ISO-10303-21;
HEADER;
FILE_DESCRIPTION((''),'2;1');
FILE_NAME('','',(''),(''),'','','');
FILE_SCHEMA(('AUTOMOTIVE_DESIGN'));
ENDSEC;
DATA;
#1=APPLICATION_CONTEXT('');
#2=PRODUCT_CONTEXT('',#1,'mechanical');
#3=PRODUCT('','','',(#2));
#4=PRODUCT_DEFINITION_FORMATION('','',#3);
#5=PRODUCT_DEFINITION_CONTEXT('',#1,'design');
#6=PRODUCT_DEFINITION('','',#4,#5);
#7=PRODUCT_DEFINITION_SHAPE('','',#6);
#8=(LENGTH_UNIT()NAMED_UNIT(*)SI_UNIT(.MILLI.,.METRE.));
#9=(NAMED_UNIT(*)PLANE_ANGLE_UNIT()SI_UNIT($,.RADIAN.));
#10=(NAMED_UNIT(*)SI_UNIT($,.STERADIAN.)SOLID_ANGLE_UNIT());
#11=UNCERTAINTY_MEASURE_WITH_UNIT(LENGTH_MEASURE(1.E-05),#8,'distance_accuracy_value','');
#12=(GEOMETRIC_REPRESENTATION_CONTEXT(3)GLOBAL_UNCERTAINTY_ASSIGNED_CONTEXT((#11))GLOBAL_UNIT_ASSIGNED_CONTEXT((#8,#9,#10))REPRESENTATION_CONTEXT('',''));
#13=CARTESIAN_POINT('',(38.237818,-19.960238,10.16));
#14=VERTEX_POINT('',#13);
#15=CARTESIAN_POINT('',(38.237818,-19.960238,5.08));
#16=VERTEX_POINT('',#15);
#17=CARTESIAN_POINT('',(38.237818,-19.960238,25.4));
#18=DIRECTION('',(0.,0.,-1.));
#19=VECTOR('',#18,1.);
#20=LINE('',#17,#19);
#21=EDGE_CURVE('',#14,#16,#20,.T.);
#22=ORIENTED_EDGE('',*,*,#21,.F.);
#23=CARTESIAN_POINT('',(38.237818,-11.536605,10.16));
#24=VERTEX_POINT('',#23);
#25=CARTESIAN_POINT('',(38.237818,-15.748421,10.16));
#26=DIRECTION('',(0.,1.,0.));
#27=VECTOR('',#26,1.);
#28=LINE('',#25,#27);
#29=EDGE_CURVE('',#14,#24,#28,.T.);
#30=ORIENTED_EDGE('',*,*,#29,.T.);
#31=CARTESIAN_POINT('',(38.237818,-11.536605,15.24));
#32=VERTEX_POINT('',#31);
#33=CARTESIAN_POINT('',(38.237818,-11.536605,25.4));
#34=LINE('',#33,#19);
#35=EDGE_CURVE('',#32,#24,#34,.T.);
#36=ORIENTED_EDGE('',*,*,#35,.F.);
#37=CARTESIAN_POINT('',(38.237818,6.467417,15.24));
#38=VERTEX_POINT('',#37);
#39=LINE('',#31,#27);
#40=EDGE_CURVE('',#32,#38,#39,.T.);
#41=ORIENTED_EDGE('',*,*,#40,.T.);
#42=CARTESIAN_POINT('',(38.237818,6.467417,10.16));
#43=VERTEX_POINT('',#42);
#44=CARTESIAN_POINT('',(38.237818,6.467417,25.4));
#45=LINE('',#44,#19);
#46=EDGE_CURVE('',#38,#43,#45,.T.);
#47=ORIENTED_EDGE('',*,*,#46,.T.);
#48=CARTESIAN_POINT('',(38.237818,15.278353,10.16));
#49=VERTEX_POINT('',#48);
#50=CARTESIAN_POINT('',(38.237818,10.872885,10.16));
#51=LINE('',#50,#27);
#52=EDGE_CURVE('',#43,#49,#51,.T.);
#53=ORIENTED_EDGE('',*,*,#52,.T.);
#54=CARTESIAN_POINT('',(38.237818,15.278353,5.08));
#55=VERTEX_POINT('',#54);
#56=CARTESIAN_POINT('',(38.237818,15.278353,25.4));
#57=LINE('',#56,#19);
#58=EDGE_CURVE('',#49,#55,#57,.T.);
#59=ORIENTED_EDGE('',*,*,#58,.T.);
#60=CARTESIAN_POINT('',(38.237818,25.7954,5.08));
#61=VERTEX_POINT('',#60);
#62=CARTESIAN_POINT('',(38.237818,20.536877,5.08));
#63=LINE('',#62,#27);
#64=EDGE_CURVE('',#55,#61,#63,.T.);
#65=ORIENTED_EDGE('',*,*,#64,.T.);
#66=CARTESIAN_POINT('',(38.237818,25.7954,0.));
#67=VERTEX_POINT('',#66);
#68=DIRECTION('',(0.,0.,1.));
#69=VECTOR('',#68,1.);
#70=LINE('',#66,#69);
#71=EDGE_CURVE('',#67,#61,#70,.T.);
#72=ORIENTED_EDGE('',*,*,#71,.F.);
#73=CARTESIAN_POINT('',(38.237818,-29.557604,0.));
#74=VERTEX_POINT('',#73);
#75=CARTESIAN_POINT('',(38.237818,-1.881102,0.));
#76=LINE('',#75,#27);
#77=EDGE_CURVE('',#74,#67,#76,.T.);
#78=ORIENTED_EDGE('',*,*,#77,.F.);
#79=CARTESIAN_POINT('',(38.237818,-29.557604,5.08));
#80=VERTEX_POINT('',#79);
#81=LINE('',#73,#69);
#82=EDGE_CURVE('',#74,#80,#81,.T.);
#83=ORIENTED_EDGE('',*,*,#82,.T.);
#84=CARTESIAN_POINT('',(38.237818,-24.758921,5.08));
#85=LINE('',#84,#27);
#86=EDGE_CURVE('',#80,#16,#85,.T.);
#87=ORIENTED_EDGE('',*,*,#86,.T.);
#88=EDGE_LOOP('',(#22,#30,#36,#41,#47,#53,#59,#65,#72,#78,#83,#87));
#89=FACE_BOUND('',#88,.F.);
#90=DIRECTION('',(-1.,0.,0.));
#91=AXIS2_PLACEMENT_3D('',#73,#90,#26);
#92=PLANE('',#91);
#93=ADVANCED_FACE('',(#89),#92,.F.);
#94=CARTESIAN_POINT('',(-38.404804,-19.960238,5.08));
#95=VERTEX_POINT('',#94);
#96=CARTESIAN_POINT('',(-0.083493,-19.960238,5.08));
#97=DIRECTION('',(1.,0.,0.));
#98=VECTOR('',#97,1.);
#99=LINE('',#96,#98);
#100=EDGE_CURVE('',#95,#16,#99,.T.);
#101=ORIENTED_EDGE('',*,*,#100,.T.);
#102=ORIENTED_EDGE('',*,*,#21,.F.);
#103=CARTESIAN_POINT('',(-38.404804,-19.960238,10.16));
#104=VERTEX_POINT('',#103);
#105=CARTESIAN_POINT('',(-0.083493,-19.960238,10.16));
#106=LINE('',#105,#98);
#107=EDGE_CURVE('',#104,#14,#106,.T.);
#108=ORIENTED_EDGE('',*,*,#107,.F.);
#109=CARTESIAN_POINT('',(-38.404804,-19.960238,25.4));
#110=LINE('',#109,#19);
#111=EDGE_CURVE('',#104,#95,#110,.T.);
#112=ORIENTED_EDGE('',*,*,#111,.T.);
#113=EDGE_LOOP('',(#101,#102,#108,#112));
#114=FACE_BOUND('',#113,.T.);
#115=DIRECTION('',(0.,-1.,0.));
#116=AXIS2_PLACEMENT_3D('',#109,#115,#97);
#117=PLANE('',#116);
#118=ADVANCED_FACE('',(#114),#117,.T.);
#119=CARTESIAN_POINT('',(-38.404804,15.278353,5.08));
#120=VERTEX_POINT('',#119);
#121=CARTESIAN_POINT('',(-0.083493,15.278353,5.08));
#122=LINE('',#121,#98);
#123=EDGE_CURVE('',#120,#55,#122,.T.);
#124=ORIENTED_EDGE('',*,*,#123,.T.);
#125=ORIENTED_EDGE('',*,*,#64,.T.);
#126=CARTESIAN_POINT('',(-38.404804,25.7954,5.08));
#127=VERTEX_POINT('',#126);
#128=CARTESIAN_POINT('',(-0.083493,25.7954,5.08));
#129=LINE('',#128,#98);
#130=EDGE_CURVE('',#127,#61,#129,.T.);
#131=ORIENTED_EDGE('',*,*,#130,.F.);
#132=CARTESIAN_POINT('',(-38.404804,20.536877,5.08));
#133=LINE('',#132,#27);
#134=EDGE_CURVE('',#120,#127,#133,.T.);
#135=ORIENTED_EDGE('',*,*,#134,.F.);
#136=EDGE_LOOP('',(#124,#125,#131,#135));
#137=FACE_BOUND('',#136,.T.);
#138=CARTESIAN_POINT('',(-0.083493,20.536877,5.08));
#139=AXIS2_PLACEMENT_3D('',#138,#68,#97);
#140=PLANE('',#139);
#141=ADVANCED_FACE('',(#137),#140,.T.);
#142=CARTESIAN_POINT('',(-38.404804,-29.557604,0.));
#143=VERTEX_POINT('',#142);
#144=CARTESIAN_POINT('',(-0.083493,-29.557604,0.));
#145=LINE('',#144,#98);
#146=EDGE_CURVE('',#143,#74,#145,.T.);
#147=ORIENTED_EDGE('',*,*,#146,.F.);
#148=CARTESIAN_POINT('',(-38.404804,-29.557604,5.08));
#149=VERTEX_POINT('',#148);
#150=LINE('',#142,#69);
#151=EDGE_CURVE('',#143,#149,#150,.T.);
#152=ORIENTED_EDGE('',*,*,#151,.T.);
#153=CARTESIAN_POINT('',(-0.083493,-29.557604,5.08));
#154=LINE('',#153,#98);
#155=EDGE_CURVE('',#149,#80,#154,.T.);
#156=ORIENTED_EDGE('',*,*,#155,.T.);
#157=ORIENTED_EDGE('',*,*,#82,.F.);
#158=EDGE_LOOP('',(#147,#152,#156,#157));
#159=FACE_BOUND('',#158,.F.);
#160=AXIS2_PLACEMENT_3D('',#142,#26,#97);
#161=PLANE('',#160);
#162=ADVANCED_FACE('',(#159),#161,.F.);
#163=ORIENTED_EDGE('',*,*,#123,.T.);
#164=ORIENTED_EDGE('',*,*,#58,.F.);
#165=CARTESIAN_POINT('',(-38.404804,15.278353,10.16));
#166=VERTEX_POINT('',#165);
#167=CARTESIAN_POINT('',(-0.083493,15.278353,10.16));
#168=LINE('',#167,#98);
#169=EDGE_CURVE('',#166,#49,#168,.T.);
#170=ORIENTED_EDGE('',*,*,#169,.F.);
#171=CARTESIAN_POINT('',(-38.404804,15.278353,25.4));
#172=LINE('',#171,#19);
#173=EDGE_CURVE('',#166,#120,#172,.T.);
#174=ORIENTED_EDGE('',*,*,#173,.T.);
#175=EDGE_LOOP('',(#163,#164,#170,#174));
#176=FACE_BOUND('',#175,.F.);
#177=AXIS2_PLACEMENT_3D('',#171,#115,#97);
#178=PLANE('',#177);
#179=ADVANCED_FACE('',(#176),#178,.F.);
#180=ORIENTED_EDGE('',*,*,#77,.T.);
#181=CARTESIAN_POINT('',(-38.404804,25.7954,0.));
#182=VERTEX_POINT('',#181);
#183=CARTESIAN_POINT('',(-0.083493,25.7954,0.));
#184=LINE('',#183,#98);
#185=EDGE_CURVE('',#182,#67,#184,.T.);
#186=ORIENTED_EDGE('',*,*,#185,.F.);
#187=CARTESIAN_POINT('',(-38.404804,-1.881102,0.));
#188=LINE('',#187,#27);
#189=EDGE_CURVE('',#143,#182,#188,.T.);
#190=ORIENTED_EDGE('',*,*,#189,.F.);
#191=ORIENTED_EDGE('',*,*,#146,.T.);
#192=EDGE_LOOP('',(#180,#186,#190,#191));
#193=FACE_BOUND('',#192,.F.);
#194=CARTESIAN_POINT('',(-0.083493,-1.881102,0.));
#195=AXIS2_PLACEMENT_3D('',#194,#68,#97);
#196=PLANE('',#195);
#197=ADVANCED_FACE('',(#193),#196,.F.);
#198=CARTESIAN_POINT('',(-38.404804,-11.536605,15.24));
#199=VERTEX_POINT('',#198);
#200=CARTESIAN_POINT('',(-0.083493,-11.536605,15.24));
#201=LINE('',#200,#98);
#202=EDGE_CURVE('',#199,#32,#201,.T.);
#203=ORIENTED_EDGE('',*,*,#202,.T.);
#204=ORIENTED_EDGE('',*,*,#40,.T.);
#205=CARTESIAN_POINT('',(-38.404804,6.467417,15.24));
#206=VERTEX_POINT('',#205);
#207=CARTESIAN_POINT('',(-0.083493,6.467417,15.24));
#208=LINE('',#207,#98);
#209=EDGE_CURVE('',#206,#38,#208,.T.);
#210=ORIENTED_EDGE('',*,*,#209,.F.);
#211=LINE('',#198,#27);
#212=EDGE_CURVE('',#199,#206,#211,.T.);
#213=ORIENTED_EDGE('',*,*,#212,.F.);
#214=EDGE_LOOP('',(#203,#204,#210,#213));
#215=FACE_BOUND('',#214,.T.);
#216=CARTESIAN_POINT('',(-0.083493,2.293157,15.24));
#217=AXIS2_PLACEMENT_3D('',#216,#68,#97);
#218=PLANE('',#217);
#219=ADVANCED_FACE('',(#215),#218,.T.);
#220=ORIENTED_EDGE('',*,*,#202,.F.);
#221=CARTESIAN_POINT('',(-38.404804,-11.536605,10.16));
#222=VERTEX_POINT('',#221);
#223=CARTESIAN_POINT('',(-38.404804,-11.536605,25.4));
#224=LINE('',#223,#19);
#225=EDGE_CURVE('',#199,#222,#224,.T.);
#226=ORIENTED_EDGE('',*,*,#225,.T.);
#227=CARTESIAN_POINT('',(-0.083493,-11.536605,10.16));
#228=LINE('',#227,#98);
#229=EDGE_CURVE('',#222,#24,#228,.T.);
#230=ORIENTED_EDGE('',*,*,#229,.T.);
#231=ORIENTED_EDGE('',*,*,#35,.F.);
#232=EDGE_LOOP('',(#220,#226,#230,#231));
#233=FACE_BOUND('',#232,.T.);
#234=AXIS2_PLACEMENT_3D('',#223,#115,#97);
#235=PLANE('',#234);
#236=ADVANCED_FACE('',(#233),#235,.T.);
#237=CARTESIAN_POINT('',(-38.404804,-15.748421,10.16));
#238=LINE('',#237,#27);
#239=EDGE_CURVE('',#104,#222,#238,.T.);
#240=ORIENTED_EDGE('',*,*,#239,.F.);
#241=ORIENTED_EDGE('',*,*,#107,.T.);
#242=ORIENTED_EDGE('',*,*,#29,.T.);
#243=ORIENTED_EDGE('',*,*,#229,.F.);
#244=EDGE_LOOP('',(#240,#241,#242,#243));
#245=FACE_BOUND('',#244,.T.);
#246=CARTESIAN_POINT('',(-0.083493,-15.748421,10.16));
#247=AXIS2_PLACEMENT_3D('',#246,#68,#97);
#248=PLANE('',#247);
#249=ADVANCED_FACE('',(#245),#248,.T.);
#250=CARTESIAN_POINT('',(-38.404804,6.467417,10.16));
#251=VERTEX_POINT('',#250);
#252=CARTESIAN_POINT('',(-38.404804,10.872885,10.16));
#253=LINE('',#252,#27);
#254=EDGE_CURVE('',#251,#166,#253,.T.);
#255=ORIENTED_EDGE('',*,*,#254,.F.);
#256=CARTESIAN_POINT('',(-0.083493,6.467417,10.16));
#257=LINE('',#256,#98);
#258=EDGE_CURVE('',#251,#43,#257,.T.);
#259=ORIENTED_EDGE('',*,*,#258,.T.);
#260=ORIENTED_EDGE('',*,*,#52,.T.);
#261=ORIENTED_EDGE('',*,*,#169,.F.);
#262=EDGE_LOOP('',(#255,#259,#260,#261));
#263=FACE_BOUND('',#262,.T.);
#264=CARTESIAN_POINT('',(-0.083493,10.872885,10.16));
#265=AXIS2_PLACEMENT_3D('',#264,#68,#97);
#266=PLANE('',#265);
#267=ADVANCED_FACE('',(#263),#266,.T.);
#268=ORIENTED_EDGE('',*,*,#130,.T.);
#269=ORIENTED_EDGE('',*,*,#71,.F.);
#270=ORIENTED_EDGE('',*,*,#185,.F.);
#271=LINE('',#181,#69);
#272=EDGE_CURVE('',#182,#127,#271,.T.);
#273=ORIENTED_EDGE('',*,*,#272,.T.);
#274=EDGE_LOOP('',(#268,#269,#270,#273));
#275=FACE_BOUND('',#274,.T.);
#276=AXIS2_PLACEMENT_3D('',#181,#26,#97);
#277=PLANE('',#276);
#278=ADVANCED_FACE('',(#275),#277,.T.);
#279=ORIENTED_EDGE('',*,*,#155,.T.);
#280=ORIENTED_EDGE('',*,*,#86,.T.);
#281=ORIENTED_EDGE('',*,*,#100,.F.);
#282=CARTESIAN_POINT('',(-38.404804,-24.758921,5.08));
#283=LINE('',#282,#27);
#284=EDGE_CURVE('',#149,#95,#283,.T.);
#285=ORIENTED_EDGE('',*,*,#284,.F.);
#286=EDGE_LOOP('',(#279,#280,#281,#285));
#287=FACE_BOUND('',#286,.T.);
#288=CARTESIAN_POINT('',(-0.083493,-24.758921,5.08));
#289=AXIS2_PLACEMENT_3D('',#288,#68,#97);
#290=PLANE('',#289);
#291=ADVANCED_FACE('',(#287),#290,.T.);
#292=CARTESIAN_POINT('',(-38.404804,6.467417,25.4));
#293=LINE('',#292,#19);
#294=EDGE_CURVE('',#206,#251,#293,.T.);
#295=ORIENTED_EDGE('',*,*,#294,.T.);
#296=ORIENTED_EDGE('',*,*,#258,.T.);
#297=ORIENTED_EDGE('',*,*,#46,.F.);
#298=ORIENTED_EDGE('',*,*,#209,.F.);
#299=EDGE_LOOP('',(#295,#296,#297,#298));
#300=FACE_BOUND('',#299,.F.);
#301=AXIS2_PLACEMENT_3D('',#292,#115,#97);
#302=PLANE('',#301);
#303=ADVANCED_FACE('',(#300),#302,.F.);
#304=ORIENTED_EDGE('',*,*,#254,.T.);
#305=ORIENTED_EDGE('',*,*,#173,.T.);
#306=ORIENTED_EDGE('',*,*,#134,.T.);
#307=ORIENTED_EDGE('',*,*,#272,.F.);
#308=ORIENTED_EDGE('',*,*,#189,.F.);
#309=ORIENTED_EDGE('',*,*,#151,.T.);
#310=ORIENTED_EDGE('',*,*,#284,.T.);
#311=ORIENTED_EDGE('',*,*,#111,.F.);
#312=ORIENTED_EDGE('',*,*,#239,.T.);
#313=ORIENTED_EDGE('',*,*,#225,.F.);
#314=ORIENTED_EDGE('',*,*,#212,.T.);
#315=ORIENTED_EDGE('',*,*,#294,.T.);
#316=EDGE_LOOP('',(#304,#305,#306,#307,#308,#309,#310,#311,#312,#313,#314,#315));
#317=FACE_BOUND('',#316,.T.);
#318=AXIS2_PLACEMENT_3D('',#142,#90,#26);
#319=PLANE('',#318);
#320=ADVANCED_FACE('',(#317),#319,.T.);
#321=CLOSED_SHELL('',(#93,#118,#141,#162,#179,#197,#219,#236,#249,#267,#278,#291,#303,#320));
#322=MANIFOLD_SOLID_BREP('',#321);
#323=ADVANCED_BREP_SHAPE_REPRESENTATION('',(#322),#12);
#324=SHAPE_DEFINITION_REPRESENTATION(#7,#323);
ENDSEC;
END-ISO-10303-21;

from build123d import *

# Parameters (mm, degrees)
F0_W     = 76.6426213086
F0_H     = 55.3530044854
F1_DEPTH = 25.4
F2_W     = 76.6426213086
F2_H     = 9.5973666757
F3_DEPTH = 20.32
F2_H_2   = 8.4236329421
F4_DEPTH = 15.24
F2_H_3   = 9.6555026248
F5_DEPTH = 10.16
F2_H_4   = 8.3485189825
F6_DEPTH = 10.16
F2_H_5   = 8.8109364733
F7_DEPTH = 15.24
F2_H_6   = 10.5170467868
F8_DEPTH = 20.32


with BuildPart() as f1:
    # F0 (on Top) → F1 (new body)
    with BuildSketch(Plane.XY):
        with Locations((-0.0834930688, -1.8811021)):
            Rectangle(F0_W, F0_H)
    extrude(amount=F1_DEPTH)

    # F2 (on face) → F3 (cut)
    with BuildSketch(Plane.XY.offset(25.4)):
        with Locations((-0.0834930688, -24.7589210048)):
            Rectangle(F2_W, F2_H)
    extrude(amount=-F3_DEPTH, mode=Mode.SUBTRACT)

    # F2 (on face) → F4 (cut)
    with BuildSketch(Plane.XY.offset(25.4)):
        with Locations((-0.0834930688, -15.7484211959)):
            Rectangle(F2_W, F2_H_2)
    extrude(amount=-F4_DEPTH, mode=Mode.SUBTRACT)

    # F2 (on face) → F5 (cut)
    with BuildSketch(Plane.XY.offset(25.4)):
        with Locations((-0.0834930688, -6.7088534124)):
            Rectangle(F2_W, F2_H_3)
    extrude(amount=-F5_DEPTH, mode=Mode.SUBTRACT)

    # F2 (on face) → F6 (cut)
    with BuildSketch(Plane.XY.offset(25.4)):
        with Locations((-0.0834930688, 2.2931573913)):
            Rectangle(F2_W, F2_H_4)
    extrude(amount=-F6_DEPTH, mode=Mode.SUBTRACT)

    # F2 (on face) → F7 (cut)
    with BuildSketch(Plane.XY.offset(25.4)):
        with Locations((-0.0834930688, 10.8728851192)):
            Rectangle(F2_W, F2_H_5)
    extrude(amount=-F7_DEPTH, mode=Mode.SUBTRACT)

    # F2 (on face) → F8 (cut)
    with BuildSketch(Plane.XY.offset(25.4)):
        with Locations((-0.0834930688, 20.5368767492)):
            Rectangle(F2_W, F2_H_6)
    extrude(amount=-F8_DEPTH, mode=Mode.SUBTRACT)


solid = f1.part
